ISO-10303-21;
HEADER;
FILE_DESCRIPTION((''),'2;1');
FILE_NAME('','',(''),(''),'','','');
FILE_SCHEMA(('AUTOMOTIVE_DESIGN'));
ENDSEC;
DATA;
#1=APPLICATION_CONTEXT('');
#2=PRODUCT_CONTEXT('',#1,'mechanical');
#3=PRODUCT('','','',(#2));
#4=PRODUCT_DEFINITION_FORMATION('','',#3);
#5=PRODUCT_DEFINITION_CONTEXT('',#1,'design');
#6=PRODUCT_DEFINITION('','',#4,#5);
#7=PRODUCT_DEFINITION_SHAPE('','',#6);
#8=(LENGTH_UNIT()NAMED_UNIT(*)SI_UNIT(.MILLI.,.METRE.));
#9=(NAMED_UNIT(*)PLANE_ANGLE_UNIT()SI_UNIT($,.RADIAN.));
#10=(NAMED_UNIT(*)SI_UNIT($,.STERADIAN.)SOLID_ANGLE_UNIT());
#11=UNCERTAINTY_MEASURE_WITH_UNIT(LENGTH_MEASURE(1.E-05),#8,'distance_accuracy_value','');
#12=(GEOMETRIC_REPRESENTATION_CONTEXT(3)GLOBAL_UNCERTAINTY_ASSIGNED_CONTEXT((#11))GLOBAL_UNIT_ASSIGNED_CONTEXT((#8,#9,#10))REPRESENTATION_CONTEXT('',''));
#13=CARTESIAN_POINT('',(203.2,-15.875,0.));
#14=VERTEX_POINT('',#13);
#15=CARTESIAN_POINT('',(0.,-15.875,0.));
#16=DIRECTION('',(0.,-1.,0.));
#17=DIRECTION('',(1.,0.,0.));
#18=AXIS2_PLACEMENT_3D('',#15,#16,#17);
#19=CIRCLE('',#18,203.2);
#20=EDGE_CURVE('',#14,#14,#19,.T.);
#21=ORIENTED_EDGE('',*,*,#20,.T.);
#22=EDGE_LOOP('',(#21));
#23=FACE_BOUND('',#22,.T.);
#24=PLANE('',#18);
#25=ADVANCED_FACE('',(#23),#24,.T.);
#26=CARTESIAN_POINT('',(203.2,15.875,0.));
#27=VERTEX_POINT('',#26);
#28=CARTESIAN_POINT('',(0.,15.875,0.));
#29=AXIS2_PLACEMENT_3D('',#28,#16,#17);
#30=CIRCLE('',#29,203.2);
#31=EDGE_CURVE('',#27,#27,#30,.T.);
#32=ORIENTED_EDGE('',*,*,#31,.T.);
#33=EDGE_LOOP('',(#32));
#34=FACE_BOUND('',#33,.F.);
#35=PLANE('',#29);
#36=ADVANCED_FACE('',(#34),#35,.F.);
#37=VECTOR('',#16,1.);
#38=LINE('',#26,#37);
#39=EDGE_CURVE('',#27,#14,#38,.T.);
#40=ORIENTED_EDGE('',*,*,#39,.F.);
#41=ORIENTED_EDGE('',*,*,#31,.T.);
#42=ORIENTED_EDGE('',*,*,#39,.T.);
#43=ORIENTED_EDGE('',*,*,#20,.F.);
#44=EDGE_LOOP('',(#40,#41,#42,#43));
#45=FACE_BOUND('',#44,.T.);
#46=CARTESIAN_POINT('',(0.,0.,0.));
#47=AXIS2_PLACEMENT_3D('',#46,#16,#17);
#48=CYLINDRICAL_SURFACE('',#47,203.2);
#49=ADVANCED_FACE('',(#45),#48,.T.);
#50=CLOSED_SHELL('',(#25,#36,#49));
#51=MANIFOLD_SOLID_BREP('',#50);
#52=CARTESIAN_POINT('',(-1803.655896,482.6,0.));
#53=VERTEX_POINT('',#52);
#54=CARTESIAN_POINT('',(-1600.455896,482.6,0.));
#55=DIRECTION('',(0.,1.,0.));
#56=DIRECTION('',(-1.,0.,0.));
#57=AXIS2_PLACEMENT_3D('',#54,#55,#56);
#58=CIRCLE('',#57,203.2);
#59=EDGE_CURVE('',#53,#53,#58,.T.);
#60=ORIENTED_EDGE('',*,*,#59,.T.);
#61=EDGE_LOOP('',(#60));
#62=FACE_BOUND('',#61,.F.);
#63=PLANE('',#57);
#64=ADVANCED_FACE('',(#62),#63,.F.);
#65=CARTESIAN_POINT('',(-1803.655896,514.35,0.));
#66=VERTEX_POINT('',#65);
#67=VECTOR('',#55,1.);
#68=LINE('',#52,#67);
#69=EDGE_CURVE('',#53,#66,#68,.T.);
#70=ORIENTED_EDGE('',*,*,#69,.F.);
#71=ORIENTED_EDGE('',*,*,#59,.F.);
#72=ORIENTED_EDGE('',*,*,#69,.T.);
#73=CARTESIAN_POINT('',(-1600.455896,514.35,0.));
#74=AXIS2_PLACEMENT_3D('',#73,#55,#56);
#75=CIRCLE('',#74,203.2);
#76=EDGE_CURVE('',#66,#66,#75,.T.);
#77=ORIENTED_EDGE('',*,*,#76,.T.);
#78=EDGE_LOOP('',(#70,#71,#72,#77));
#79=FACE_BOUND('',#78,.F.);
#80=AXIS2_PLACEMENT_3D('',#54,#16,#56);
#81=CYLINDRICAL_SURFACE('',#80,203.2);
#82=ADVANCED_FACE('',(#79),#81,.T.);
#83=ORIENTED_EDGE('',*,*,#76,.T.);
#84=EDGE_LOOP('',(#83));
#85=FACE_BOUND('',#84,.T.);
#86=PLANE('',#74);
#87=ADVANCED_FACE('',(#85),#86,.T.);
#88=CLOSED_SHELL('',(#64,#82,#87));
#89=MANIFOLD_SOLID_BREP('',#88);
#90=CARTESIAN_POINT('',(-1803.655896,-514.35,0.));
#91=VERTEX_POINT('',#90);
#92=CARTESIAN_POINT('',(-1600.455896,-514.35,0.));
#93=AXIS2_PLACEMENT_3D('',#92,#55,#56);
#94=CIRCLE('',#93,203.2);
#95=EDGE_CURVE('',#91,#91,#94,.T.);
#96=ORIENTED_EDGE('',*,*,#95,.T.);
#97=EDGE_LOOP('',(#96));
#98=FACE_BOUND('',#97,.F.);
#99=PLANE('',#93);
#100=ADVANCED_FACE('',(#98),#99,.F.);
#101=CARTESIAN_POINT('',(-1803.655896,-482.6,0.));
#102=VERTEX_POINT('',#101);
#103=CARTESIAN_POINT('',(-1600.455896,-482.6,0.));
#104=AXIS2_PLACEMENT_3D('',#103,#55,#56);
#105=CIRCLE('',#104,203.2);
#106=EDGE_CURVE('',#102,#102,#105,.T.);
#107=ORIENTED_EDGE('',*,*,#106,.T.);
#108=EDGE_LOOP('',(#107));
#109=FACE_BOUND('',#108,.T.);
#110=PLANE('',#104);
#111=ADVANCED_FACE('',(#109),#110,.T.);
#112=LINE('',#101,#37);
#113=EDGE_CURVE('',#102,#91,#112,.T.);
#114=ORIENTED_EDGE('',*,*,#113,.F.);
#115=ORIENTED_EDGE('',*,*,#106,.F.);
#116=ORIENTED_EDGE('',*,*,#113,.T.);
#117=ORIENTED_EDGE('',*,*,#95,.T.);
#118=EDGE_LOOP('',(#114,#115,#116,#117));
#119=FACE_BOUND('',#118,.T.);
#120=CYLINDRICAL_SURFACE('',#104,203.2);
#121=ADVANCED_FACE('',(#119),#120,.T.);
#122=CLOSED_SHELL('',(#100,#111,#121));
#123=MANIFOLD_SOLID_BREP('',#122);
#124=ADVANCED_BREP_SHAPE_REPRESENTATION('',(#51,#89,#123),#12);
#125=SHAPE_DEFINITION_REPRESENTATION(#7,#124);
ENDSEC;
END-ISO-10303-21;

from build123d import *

# Parameters (mm, degrees)
F0_R      = 203.2
F1_DEPTH  = 15.875
F7_R      = 203.2
F8_DEPTH  = 31.75
F9_R      = 203.2
F10_DEPTH = 31.75


# Not quite as in the source:
# - the program builds the solid bodies; features that only make, move or delete a surface that nothing else refers to are left out


with BuildPart() as f1:
    # F0 (on Front) → F1 (new body, symmetric)
    with BuildSketch(Plane.XZ):
        Circle(F0_R)
    extrude(amount=F1_DEPTH, both=True)


with BuildPart() as f8:
    # F7 (on plane+point) → F8 (new body)
    with BuildSketch(Plane(origin=(0, 482.6, 0), x_dir=(-1, 0, 0), z_dir=(0, 1, 0))):
        with Locations((1600.4558962578, 0)):
            Circle(F7_R)
    extrude(amount=F8_DEPTH)


with BuildPart() as f10:
    # F9 (on plane+point) → F10 (new body)
    with BuildSketch(Plane(origin=(0, -482.6, 0), x_dir=(-1, 0, 0), z_dir=(0, 1, 0))):
        with Locations((1600.4558962578, 0)):
            Circle(F9_R)
    extrude(amount=-F10_DEPTH)


solid = Compound([f1.part, f8.part, f10.part])
